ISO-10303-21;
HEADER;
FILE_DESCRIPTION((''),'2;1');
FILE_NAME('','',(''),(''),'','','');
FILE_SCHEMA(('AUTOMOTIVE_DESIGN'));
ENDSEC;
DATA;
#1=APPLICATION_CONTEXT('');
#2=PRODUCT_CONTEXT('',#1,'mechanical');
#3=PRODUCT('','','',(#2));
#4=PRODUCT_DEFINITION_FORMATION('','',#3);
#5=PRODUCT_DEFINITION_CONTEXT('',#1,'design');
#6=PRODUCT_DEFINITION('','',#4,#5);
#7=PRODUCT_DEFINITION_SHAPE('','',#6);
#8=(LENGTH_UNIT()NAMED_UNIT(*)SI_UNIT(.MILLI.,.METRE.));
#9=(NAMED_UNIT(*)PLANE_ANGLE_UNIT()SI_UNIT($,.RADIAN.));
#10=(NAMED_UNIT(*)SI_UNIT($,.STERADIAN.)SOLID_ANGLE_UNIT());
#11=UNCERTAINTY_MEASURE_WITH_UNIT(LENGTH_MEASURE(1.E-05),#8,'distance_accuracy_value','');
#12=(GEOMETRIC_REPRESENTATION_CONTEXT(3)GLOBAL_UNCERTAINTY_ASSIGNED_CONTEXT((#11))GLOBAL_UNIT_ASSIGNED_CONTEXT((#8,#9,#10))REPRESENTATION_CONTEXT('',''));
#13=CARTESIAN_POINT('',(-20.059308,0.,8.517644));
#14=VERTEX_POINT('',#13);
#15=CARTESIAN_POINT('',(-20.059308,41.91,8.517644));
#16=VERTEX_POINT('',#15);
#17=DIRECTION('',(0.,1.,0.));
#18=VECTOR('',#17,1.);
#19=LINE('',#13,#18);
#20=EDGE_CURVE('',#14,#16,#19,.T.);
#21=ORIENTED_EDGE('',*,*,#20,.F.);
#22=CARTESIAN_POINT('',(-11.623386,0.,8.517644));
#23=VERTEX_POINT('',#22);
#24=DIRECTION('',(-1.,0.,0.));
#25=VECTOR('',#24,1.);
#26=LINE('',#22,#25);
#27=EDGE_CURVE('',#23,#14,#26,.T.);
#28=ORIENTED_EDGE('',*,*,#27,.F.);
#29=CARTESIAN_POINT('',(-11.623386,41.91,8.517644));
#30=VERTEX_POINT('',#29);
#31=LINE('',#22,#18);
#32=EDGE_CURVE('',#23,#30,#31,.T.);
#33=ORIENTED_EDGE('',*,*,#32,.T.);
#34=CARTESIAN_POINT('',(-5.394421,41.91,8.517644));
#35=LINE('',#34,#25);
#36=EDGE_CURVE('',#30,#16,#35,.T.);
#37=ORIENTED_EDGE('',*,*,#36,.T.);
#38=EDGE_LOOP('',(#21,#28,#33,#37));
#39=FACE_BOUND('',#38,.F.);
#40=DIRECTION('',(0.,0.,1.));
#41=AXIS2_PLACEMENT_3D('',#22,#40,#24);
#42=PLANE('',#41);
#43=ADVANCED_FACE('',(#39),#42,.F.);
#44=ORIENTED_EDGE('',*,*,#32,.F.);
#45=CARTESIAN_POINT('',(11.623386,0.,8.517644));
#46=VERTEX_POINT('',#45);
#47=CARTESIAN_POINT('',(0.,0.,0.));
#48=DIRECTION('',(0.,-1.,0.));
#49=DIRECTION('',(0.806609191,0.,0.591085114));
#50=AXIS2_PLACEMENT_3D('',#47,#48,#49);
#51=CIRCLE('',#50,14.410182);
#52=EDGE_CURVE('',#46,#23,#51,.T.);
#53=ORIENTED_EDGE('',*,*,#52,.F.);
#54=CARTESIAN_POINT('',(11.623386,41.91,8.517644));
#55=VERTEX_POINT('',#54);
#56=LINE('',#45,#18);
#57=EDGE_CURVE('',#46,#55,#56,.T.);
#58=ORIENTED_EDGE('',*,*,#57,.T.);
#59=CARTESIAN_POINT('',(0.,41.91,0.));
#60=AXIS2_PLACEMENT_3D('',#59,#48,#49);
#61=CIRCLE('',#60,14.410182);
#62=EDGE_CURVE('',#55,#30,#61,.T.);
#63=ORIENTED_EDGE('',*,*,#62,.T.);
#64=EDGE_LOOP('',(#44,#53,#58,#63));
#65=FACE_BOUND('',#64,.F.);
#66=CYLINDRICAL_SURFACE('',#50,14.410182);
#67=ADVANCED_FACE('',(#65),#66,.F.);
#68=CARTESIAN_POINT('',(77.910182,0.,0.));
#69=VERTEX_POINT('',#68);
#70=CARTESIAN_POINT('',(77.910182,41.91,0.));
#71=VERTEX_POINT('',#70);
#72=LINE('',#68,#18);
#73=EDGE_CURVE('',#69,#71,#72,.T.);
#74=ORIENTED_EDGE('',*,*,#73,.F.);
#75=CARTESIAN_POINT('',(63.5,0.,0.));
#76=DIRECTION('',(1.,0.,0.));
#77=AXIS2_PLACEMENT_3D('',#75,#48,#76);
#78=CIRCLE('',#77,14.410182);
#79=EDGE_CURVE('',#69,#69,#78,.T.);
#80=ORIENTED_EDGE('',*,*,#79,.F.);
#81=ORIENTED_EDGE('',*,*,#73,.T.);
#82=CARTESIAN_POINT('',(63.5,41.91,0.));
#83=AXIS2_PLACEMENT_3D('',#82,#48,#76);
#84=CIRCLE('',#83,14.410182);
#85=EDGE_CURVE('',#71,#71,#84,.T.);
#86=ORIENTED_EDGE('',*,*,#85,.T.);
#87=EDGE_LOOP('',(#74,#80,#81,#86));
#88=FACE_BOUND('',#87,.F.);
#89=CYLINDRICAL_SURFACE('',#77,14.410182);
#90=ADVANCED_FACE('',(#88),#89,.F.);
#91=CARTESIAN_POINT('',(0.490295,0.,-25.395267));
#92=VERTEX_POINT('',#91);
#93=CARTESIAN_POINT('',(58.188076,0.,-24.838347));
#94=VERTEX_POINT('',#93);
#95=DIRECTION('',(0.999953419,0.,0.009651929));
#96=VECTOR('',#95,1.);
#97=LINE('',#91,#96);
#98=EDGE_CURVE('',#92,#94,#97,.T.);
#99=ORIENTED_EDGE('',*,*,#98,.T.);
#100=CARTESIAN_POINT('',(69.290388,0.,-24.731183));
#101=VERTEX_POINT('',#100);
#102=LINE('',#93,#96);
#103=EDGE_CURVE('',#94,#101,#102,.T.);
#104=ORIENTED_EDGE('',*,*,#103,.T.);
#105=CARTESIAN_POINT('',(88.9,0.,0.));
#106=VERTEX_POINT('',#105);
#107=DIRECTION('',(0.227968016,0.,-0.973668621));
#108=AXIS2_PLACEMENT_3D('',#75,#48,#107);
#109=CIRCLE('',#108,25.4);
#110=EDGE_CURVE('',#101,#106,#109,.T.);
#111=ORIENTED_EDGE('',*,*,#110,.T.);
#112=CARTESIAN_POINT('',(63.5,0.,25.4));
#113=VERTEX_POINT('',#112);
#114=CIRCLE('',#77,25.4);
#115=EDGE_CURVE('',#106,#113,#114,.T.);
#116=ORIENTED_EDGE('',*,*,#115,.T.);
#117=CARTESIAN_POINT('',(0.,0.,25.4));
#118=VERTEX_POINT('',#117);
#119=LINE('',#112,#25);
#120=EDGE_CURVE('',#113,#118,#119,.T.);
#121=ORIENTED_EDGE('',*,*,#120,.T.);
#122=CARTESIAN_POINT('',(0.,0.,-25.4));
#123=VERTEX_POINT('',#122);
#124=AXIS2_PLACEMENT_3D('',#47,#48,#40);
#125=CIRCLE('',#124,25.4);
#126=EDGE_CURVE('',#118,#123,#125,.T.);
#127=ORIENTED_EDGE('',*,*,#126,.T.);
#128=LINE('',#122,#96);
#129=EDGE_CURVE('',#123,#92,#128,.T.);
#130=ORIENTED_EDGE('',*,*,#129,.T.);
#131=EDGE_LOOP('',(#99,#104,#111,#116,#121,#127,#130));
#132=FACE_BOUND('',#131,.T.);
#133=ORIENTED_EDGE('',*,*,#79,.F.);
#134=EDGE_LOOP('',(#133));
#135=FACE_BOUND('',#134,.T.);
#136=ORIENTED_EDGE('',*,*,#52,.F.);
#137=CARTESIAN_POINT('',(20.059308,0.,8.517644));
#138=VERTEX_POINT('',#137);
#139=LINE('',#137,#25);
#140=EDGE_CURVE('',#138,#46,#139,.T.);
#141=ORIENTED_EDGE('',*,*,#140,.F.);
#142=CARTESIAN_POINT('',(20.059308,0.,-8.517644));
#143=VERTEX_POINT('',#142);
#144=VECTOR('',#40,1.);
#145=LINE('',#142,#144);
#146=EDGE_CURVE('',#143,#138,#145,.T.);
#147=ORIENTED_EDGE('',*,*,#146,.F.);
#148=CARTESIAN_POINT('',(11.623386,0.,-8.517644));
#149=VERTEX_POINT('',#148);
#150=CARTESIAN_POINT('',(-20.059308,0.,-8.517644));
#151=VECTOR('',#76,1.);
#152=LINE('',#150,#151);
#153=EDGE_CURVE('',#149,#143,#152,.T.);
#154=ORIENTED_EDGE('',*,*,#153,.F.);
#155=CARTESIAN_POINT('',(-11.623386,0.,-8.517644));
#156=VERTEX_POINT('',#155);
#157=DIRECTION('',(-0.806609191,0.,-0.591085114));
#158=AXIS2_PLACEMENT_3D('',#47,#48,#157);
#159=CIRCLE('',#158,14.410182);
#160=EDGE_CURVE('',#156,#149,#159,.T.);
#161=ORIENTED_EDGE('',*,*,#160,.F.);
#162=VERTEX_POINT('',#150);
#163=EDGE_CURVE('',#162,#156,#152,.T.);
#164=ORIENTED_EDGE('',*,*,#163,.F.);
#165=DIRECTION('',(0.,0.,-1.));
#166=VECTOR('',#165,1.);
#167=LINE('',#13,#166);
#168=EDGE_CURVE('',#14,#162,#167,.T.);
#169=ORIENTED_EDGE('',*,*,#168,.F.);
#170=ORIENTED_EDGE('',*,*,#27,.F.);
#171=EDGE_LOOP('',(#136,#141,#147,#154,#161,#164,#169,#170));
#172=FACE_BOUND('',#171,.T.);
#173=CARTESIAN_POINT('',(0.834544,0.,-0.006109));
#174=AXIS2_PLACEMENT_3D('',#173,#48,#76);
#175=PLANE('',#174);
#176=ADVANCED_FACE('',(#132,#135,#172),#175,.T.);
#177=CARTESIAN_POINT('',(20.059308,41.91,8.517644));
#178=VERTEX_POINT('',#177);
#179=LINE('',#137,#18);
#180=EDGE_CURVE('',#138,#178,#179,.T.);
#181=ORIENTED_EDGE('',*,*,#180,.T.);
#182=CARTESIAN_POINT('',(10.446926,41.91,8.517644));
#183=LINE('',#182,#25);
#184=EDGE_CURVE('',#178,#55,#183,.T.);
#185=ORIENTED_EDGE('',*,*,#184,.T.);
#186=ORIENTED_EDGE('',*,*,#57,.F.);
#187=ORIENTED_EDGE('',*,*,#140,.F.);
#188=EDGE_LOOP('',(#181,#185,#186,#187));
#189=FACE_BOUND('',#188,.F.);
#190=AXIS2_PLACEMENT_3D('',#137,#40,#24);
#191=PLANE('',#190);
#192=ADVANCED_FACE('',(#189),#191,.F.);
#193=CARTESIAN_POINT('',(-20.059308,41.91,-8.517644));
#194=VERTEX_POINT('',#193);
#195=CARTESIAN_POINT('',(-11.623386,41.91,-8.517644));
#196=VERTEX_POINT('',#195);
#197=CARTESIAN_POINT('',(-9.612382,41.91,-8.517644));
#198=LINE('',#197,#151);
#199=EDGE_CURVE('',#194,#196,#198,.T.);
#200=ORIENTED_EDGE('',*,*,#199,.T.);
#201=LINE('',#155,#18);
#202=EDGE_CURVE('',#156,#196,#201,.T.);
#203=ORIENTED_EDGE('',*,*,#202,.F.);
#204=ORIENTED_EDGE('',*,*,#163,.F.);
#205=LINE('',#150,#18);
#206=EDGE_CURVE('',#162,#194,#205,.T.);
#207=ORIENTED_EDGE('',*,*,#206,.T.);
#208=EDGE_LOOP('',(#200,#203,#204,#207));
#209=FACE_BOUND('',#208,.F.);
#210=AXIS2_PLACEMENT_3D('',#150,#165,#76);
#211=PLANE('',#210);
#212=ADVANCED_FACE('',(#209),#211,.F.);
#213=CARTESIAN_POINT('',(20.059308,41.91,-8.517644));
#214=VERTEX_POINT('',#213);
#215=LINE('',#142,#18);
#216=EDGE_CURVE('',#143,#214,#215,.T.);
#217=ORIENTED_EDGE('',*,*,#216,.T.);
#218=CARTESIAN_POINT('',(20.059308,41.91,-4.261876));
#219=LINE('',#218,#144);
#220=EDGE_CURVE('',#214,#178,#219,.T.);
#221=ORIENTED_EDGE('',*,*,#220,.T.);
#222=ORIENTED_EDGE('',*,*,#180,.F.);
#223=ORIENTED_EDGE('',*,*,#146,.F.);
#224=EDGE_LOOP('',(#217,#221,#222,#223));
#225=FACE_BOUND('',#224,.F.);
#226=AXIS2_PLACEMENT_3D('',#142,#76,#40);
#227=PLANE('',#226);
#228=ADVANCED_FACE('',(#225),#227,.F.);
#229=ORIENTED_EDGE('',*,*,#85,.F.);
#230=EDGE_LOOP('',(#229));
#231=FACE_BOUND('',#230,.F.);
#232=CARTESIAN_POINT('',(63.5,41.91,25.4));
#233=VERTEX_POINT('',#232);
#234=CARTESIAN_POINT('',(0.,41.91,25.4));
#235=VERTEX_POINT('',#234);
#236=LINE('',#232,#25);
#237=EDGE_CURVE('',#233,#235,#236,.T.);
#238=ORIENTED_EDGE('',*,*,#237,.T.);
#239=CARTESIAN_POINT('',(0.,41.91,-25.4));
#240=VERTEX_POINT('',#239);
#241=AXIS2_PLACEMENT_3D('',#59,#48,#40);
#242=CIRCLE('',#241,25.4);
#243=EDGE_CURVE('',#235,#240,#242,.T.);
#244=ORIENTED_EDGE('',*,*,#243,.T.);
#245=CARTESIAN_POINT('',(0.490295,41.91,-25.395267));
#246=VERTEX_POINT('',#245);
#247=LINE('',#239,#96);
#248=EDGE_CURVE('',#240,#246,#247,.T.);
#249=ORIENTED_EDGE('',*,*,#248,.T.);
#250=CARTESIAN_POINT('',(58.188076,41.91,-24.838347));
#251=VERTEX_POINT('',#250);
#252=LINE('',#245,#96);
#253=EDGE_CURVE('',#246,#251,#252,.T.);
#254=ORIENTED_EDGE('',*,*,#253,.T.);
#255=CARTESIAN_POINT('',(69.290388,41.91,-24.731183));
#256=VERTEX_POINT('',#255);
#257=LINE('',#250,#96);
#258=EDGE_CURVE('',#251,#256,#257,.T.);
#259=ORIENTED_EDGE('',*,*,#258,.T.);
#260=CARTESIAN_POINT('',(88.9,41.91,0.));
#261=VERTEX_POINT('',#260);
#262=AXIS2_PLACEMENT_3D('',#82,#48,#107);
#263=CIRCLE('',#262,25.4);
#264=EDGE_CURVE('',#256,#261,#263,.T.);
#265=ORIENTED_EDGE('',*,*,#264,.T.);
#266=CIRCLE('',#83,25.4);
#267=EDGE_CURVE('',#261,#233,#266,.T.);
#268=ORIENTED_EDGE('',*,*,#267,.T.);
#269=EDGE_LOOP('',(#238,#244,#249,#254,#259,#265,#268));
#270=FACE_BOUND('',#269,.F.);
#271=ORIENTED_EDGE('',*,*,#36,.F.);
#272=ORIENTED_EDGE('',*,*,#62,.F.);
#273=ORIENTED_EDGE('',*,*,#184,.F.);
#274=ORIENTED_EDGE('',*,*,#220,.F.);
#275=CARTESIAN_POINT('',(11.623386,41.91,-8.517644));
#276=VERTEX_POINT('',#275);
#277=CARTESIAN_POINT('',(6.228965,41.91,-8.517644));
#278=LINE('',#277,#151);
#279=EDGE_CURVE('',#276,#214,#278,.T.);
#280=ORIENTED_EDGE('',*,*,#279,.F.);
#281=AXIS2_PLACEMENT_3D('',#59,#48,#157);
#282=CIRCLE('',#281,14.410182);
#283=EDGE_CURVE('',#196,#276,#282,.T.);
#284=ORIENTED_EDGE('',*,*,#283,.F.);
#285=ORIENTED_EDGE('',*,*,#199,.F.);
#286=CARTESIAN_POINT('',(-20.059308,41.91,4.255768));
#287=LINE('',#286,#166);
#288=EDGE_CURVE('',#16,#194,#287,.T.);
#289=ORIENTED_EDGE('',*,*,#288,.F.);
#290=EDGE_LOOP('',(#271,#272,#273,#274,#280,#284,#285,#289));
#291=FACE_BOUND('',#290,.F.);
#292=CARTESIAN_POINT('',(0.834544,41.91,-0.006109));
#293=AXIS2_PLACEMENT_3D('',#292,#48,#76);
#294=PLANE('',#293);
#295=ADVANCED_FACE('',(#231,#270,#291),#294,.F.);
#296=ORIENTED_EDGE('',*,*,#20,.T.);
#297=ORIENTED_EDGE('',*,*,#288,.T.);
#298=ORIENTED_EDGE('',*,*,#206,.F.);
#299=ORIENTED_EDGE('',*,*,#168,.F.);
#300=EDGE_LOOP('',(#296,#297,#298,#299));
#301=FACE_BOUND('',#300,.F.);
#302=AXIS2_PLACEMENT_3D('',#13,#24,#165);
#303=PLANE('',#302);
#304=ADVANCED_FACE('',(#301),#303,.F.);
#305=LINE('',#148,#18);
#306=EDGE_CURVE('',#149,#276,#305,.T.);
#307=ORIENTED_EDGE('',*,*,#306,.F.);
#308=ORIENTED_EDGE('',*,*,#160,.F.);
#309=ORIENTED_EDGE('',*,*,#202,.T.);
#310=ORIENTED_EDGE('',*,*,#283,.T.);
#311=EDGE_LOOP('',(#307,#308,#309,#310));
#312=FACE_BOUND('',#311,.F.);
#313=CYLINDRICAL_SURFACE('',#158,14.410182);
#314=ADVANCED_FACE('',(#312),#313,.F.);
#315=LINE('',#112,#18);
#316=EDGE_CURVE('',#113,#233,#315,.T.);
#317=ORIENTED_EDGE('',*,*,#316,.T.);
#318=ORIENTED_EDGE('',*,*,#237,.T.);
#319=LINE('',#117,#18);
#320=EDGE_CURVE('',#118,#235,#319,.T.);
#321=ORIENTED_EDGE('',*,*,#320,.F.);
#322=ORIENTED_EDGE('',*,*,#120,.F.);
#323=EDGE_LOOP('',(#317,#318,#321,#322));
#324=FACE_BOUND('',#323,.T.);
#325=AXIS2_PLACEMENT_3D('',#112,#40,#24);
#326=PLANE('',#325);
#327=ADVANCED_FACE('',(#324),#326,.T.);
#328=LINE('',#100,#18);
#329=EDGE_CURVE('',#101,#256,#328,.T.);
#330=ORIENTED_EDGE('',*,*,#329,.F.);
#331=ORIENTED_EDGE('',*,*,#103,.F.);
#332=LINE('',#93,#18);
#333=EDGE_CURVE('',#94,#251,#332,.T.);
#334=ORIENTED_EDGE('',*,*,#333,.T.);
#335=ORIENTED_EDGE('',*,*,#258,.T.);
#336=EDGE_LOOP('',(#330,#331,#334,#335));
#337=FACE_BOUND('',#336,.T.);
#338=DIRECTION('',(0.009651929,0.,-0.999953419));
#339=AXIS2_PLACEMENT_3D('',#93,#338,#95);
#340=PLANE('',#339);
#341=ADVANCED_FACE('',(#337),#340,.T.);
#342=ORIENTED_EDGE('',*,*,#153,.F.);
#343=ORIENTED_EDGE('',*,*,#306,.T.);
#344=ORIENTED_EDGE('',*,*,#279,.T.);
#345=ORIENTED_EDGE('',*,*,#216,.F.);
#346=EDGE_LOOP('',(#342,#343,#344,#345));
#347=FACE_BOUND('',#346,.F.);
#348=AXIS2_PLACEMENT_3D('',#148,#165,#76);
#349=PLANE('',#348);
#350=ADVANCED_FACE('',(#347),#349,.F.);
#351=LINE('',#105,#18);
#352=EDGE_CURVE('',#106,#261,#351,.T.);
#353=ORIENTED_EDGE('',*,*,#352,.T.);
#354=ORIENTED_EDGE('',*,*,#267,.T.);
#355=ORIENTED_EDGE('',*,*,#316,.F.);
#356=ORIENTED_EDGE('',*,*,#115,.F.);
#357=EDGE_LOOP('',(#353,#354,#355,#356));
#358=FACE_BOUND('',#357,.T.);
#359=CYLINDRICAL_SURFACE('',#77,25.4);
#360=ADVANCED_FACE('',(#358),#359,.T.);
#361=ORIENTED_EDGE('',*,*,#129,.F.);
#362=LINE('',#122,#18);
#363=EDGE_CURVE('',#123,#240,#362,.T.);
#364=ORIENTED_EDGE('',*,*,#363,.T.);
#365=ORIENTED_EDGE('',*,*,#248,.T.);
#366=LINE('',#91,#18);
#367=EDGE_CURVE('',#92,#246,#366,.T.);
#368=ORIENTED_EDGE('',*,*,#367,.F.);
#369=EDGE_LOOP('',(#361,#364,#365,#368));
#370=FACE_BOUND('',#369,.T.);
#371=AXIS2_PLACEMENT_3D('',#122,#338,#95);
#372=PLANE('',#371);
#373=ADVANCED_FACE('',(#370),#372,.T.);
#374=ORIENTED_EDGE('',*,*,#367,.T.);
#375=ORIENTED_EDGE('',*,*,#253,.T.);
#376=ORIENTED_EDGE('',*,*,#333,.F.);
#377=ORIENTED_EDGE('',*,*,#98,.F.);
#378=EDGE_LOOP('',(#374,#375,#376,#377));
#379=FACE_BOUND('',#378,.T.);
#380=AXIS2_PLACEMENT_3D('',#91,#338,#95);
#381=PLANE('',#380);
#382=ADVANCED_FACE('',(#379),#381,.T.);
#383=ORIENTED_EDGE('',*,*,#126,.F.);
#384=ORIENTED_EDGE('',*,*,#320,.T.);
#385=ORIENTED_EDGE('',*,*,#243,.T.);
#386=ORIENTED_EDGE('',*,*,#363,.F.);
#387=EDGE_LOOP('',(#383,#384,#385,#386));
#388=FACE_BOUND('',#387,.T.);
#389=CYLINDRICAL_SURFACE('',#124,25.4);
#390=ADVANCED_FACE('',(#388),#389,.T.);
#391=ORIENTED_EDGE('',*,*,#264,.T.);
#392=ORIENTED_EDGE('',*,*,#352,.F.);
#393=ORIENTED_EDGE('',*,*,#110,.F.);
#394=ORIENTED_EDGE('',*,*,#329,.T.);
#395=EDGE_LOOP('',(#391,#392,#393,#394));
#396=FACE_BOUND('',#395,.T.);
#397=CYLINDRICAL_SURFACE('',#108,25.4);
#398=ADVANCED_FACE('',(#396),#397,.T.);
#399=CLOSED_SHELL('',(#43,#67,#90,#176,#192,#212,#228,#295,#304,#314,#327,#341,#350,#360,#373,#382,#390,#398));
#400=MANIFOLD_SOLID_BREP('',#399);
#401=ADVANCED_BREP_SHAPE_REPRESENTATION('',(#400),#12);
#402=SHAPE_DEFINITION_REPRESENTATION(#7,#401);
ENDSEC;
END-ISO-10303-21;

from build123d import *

# Parameters (mm, degrees)
F0_R     = 14.4101824993
F1_DEPTH = 41.91
F4_DEPTH = 119.38


# Not quite as in the source:
# - a feature of the source that left no trace in its solid (it failed there, or was rolled back) is left out


with BuildPart() as f1:
    # F0 (on Front) → F1 (new body)
    with BuildSketch(Plane.XZ):
        with BuildLine():
            ThreePointArc((0.4902951327, -25.3952674859), (18.133029206, -17.7863220429), (25.4, 0))
            ThreePointArc((25.4, 0), (17.9605122421, 17.9605122421), (0, 25.4))
            ThreePointArc((0, 25.4), (-25.4, 0), (0, -25.4))
            Line((0, -25.4), (0.4902951327, -25.3952674859))
        make_face()
        with BuildLine():
            ThreePointArc((-11.6233856549, 8.5176443681), (0, 14.4101824993), (11.6233856549, 8.5176443681))
            Line((11.6233856549, 8.5176443681), (20.0593080372, 8.5176443681))
            Line((20.0593080372, 8.5176443681), (20.0593080372, -8.5176443681))
            Line((20.0593080372, -8.5176443681), (11.6233856549, -8.5176443681))
            ThreePointArc((11.6233856549, -8.5176443681), (0, -14.4101824993), (-11.6233856549, -8.5176443681))
            Line((-11.6233856549, -8.5176443681), (-20.0593080372, -8.5176443681))
            Line((-20.0593080372, -8.5176443681), (-20.0593080372, 8.5176443681))
            Line((-20.0593080372, 8.5176443681), (-11.6233856549, 8.5176443681))
        make_face(mode=Mode.SUBTRACT)
        with BuildLine():
            ThreePointArc((0, 25.4), (17.9605122421, 17.9605122421), (25.4, 0))
            ThreePointArc((25.4, 0), (18.133029206, -17.7863220429), (0.4902951327, -25.3952674859))
            Line((0.4902951327, -25.3952674859), (58.1880762297, -24.8383466813))
            ThreePointArc((58.1880762297, -24.8383466813), (38.2408035984, 2.670767146), (63.5, 25.4))
            Line((63.5, 25.4), (0, 25.4))
        make_face()
        with BuildLine():
            ThreePointArc((88.9, 0), (81.4605122421, 17.9605122421), (63.5, 25.4))
            ThreePointArc((63.5, 25.4), (38.2408035984, 2.670767146), (58.1880762297, -24.8383466813))
            Line((58.1880762297, -24.8383466813), (69.2903876179, -24.7311829728))
            ThreePointArc((69.2903876179, -24.7311829728), (83.4027114421, -15.7810670505), (88.9, 0))
        make_face()
        with Locations((63.5, 0)):
            Circle(F0_R, mode=Mode.SUBTRACT)
        with Locations((63.5, 0)):
            Circle(F0_R)
        with BuildLine():
            ThreePointArc((-11.6233856549, -8.5176443681), (-14.4101824993, 0), (-11.6233856549, 8.5176443681))
            Line((-11.6233856549, 8.5176443681), (-20.0593080372, 8.5176443681))
            Line((-20.0593080372, 8.5176443681), (-20.0593080372, -8.5176443681))
            Line((-20.0593080372, -8.5176443681), (-11.6233856549, -8.5176443681))
        make_face()
        with BuildLine():
            ThreePointArc((11.6233856549, -8.5176443681), (13.6957743156, -4.4809737288), (14.4101824993, 0))
            ThreePointArc((14.4101824993, 0), (13.6957743156, 4.4809737288), (11.6233856549, 8.5176443681))
            Line((11.6233856549, 8.5176443681), (-11.6233856549, 8.5176443681))
            ThreePointArc((-11.6233856549, 8.5176443681), (-14.4101824993, 0), (-11.6233856549, -8.5176443681))
            Line((-11.6233856549, -8.5176443681), (11.6233856549, -8.5176443681))
        make_face()
        with BuildLine():
            Line((-11.6233856549, 8.5176443681), (11.6233856549, 8.5176443681))
            ThreePointArc((11.6233856549, 8.5176443681), (0, 14.4101824993), (-11.6233856549, 8.5176443681))
        make_face()
        with BuildLine():
            ThreePointArc((-11.6233856549, -8.5176443681), (0, -14.4101824993), (11.6233856549, -8.5176443681))
            Line((11.6233856549, -8.5176443681), (-11.6233856549, -8.5176443681))
        make_face()
        with BuildLine():
            ThreePointArc((11.6233856549, 8.5176443681), (13.6957743156, 4.4809737288), (14.4101824993, 0))
            ThreePointArc((14.4101824993, 0), (13.6957743156, -4.4809737288), (11.6233856549, -8.5176443681))
            Line((11.6233856549, -8.5176443681), (20.0593080372, -8.5176443681))
            Line((20.0593080372, -8.5176443681), (20.0593080372, 8.5176443681))
            Line((20.0593080372, 8.5176443681), (11.6233856549, 8.5176443681))
        make_face()
    extrude(amount=-F1_DEPTH)

    # F0 (on Front) → F4 (cut)
    with BuildSketch(Plane.XZ):
        with BuildLine():
            ThreePointArc((-11.6233856549, -8.5176443681), (-14.4101824993, 0), (-11.6233856549, 8.5176443681))
            Line((-11.6233856549, 8.5176443681), (-20.0593080372, 8.5176443681))
            Line((-20.0593080372, 8.5176443681), (-20.0593080372, -8.5176443681))
            Line((-20.0593080372, -8.5176443681), (-11.6233856549, -8.5176443681))
        make_face()
        with BuildLine():
            Line((-11.6233856549, 8.5176443681), (11.6233856549, 8.5176443681))
            ThreePointArc((11.6233856549, 8.5176443681), (0, 14.4101824993), (-11.6233856549, 8.5176443681))
        make_face()
        with BuildLine():
            ThreePointArc((11.6233856549, 8.5176443681), (13.6957743156, 4.4809737288), (14.4101824993, 0))
            ThreePointArc((14.4101824993, 0), (13.6957743156, -4.4809737288), (11.6233856549, -8.5176443681))
            Line((11.6233856549, -8.5176443681), (20.0593080372, -8.5176443681))
            Line((20.0593080372, -8.5176443681), (20.0593080372, 8.5176443681))
            Line((20.0593080372, 8.5176443681), (11.6233856549, 8.5176443681))
        make_face()
        with BuildLine():
            ThreePointArc((11.6233856549, -8.5176443681), (13.6957743156, -4.4809737288), (14.4101824993, 0))
            ThreePointArc((14.4101824993, 0), (13.6957743156, 4.4809737288), (11.6233856549, 8.5176443681))
            Line((11.6233856549, 8.5176443681), (-11.6233856549, 8.5176443681))
            ThreePointArc((-11.6233856549, 8.5176443681), (-14.4101824993, 0), (-11.6233856549, -8.5176443681))
            Line((-11.6233856549, -8.5176443681), (11.6233856549, -8.5176443681))
        make_face()
        with BuildLine():
            ThreePointArc((-11.6233856549, -8.5176443681), (0, -14.4101824993), (11.6233856549, -8.5176443681))
            Line((11.6233856549, -8.5176443681), (-11.6233856549, -8.5176443681))
        make_face()
        with Locations((63.5, 0)):
            Circle(F0_R)
    extrude(amount=-F4_DEPTH, mode=Mode.SUBTRACT)


solid = f1.part
